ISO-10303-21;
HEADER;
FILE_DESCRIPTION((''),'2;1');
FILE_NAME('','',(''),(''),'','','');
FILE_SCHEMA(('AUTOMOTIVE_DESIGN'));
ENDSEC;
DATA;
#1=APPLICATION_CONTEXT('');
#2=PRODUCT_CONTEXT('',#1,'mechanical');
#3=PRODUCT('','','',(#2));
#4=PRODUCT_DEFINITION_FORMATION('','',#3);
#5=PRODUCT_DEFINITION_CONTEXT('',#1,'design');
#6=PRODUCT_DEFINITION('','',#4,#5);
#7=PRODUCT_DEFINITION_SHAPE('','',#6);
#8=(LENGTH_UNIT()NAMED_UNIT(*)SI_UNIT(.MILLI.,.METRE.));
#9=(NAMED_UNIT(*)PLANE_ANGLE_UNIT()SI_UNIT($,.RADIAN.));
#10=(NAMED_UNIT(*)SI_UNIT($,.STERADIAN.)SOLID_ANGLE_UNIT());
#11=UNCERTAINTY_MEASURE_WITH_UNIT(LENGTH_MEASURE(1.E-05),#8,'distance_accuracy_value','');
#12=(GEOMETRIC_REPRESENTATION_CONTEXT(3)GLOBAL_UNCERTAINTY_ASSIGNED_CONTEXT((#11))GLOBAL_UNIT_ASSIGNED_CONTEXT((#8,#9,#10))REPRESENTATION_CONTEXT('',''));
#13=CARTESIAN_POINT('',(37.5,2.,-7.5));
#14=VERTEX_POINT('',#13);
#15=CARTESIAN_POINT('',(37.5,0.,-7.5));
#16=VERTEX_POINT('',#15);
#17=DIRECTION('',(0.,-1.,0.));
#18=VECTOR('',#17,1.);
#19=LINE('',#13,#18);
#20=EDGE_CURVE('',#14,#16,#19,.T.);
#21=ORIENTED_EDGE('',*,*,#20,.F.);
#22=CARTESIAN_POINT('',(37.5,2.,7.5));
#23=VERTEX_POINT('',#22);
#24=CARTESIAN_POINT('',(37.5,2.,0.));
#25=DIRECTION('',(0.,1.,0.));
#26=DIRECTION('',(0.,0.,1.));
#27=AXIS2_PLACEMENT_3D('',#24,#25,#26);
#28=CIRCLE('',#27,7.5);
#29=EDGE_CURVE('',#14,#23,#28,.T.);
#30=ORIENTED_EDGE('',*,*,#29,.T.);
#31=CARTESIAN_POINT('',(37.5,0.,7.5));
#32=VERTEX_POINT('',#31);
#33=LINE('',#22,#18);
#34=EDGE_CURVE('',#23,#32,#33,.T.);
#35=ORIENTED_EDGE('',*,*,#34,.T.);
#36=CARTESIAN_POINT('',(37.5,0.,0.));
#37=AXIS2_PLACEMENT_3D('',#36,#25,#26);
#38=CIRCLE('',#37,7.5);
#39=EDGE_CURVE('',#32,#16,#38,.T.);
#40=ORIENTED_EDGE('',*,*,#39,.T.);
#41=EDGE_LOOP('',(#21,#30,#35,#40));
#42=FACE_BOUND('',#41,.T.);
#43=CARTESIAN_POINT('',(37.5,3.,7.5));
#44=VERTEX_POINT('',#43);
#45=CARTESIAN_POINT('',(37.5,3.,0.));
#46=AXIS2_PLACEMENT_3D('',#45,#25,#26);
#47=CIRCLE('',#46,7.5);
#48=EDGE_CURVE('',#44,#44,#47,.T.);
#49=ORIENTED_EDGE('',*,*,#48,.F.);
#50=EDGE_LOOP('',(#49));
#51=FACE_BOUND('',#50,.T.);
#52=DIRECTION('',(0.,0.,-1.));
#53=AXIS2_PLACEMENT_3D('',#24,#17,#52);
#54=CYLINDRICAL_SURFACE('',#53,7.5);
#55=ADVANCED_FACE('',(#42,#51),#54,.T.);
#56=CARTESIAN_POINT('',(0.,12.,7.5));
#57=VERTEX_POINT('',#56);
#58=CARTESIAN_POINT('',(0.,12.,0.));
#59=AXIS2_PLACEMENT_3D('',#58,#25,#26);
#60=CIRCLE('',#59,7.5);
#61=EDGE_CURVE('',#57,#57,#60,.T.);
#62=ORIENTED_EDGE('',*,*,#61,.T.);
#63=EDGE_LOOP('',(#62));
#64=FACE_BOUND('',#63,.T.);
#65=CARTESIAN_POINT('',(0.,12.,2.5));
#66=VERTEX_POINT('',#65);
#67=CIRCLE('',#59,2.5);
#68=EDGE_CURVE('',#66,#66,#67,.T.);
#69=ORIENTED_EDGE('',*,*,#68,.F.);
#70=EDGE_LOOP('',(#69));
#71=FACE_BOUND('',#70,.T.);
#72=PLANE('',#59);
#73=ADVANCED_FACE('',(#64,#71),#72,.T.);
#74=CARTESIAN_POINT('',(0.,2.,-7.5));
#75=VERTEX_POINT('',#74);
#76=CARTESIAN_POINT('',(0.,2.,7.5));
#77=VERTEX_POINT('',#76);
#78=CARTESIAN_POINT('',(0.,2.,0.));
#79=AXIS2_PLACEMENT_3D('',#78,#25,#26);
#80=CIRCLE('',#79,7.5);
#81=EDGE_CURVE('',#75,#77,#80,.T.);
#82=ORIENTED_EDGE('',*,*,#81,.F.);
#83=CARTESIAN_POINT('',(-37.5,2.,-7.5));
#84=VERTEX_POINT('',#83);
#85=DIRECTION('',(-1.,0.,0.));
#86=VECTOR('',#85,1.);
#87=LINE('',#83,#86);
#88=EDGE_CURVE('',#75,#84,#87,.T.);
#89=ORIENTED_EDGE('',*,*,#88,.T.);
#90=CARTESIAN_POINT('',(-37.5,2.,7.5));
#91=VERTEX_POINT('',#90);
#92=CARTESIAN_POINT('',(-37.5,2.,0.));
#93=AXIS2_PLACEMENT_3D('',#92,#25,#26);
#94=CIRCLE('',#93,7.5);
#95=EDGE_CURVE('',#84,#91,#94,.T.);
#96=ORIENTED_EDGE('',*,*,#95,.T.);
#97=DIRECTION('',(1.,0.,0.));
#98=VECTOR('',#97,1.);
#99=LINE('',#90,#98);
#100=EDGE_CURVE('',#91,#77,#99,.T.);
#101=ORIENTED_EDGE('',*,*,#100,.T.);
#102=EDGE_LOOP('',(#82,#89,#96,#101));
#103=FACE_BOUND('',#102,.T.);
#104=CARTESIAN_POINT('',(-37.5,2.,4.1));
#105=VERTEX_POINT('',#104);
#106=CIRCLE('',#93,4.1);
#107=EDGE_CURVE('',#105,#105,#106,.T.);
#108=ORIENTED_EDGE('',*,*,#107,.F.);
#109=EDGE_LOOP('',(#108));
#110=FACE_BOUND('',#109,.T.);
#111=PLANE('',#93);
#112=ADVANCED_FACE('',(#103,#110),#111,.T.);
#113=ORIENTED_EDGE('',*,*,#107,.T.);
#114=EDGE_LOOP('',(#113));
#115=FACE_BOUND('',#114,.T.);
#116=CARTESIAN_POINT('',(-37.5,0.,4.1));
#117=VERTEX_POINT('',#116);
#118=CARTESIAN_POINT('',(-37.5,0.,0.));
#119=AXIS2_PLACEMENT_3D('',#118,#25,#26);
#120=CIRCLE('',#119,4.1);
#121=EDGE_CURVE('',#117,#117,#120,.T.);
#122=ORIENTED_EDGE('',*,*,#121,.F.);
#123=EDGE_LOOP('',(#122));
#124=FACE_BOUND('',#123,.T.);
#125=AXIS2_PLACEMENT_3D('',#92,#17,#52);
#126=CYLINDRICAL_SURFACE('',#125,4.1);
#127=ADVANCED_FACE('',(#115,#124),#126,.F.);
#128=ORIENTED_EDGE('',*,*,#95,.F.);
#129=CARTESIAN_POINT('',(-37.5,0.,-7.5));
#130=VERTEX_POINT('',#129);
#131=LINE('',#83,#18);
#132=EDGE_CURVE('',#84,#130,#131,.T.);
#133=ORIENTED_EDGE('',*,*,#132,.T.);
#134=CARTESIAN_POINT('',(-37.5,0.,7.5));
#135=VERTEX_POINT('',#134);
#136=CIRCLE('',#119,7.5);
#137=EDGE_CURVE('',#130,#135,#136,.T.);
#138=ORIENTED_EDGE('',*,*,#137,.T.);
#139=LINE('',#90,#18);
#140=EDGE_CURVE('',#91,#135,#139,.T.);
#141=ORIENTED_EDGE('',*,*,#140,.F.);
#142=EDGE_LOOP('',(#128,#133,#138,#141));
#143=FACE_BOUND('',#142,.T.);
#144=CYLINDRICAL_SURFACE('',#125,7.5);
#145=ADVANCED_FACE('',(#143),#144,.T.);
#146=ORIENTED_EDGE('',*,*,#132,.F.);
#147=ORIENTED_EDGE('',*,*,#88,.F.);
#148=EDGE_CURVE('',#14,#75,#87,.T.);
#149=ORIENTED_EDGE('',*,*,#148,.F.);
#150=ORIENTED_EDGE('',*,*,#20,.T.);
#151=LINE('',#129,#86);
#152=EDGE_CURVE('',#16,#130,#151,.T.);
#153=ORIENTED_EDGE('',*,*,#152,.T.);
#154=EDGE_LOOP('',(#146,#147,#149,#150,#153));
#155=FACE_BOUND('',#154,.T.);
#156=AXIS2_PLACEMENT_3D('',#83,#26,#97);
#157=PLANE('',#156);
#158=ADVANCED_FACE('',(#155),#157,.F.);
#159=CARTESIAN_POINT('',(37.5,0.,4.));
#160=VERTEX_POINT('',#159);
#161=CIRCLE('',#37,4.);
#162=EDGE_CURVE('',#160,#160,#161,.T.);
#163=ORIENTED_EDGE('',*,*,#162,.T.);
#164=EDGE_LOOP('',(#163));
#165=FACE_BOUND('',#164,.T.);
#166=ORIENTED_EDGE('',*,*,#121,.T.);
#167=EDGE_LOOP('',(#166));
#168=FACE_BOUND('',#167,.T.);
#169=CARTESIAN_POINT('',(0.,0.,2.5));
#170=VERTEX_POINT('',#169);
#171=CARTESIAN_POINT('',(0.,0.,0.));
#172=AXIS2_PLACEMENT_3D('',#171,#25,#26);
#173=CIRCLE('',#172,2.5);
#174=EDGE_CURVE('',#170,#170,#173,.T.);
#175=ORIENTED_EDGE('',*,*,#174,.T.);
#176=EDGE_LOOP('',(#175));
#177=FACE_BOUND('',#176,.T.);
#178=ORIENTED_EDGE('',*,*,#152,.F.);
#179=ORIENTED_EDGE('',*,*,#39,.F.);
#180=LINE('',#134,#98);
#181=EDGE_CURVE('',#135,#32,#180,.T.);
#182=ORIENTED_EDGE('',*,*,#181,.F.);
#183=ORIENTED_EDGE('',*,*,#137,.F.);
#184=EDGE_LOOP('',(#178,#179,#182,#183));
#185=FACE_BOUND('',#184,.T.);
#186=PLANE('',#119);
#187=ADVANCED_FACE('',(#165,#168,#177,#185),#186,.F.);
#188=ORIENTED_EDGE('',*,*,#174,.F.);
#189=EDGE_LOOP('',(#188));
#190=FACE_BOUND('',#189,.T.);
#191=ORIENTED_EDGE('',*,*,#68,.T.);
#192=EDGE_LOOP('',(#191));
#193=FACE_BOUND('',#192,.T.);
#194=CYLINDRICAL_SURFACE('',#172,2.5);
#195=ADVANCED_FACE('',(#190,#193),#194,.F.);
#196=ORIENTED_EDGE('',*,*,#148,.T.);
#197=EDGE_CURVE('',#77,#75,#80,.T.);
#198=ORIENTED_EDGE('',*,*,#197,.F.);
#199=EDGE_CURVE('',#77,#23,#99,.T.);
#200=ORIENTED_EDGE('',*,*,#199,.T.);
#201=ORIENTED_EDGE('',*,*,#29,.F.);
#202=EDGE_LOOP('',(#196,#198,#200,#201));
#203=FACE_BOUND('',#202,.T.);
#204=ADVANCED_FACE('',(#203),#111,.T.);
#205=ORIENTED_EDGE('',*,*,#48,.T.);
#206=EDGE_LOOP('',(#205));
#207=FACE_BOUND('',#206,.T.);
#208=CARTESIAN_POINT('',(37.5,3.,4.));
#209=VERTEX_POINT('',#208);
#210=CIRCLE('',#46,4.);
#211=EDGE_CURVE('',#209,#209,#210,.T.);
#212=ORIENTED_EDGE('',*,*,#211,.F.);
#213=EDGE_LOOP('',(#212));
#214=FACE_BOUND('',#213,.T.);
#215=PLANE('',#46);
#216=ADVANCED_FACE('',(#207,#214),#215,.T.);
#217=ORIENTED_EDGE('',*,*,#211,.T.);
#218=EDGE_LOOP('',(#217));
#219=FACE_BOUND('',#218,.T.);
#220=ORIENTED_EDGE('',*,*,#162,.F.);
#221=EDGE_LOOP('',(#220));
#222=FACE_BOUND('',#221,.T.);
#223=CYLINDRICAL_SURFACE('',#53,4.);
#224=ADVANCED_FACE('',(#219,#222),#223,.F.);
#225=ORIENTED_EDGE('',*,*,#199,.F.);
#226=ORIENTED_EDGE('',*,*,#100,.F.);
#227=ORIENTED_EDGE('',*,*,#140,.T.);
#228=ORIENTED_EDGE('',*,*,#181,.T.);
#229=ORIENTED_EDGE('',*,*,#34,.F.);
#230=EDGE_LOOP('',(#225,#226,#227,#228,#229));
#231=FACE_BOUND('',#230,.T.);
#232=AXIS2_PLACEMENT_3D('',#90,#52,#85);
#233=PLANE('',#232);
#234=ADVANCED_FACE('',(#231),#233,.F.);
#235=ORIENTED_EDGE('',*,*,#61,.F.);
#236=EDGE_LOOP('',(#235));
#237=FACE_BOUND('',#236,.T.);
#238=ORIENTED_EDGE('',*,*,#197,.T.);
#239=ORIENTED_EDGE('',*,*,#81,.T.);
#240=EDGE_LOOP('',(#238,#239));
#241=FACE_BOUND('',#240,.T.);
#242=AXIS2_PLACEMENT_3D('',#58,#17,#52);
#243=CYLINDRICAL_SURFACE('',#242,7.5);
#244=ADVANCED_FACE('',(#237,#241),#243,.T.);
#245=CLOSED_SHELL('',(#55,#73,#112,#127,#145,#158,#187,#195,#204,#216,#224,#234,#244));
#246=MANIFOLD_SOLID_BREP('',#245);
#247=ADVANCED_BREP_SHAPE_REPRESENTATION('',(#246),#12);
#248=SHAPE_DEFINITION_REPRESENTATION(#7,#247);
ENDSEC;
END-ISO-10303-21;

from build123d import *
from build123d.topology import SkipClean

# Parameters (mm, degrees)
SKETCH1_R           = 4.1
SKETCH1_R_2         = 4
BOSS_EXTRUDE1_DEPTH = 2
SKETCH3_R           = 7.5
BOSS_EXTRUDE3_DEPTH = 10
SKETCH4_R           = 2.5
CUT_EXTRUDE1_DEPTH  = 48.172555581
SKETCH5_R           = 7.5
SKETCH5_R_2         = 4
BOSS_EXTRUDE4_DEPTH = 1


with BuildPart() as part:
    # Sketch1 → Boss-Extrude1 (new body)
    with BuildSketch(Plane(origin=(0, 0, 0), x_dir=(1, 0, 0), z_dir=(0, 1, 0))):
        with BuildLine():
            Line((-37.5, 7.5), (37.5, 7.5))
            ThreePointArc((37.5, 7.5), (45, 0), (37.5, -7.5))
            Line((37.5, -7.5), (-37.5, -7.5))
            ThreePointArc((-37.5, -7.5), (-45, 0), (-37.5, 7.5))
        make_face()
        with Locations((-37.5, 0)):
            Circle(SKETCH1_R, mode=Mode.SUBTRACT)
        with Locations((37.5, 0)):
            Circle(SKETCH1_R_2, mode=Mode.SUBTRACT)
    extrude(amount=BOSS_EXTRUDE1_DEPTH)

    # Sketch3 → Boss-Extrude3 (add)
    with BuildSketch(Plane(origin=(0, 2, 0), x_dir=(1, 0, 0), z_dir=(0, 1, 0))):
        Circle(SKETCH3_R)
    extrude(amount=BOSS_EXTRUDE3_DEPTH)

    # Sketch4 → Cut-Extrude1 (cut, through all)
    with BuildSketch(Plane(origin=(0, 12, 0), x_dir=(1, 0, 0), z_dir=(0, 1, 0))):
        Circle(SKETCH4_R)
    extrude(amount=-CUT_EXTRUDE1_DEPTH, mode=Mode.SUBTRACT)

    # Sketch5 → Boss-Extrude4 (add)
    with SkipClean():  # the faces are left unmerged after this step: merging them gives an invalid solid
        with BuildSketch(Plane(origin=(0, 2, 0), x_dir=(1, 0, 0), z_dir=(0, 1, 0))):
            with Locations((37.5, 0)):
                Circle(SKETCH5_R)
            with Locations((37.5, 0)):
                Circle(SKETCH5_R_2, mode=Mode.SUBTRACT)
        extrude(amount=BOSS_EXTRUDE4_DEPTH)
    add(part.part.scale(1), mode=Mode.REPLACE)  # the faces are merged on a copy


solid = part.part
